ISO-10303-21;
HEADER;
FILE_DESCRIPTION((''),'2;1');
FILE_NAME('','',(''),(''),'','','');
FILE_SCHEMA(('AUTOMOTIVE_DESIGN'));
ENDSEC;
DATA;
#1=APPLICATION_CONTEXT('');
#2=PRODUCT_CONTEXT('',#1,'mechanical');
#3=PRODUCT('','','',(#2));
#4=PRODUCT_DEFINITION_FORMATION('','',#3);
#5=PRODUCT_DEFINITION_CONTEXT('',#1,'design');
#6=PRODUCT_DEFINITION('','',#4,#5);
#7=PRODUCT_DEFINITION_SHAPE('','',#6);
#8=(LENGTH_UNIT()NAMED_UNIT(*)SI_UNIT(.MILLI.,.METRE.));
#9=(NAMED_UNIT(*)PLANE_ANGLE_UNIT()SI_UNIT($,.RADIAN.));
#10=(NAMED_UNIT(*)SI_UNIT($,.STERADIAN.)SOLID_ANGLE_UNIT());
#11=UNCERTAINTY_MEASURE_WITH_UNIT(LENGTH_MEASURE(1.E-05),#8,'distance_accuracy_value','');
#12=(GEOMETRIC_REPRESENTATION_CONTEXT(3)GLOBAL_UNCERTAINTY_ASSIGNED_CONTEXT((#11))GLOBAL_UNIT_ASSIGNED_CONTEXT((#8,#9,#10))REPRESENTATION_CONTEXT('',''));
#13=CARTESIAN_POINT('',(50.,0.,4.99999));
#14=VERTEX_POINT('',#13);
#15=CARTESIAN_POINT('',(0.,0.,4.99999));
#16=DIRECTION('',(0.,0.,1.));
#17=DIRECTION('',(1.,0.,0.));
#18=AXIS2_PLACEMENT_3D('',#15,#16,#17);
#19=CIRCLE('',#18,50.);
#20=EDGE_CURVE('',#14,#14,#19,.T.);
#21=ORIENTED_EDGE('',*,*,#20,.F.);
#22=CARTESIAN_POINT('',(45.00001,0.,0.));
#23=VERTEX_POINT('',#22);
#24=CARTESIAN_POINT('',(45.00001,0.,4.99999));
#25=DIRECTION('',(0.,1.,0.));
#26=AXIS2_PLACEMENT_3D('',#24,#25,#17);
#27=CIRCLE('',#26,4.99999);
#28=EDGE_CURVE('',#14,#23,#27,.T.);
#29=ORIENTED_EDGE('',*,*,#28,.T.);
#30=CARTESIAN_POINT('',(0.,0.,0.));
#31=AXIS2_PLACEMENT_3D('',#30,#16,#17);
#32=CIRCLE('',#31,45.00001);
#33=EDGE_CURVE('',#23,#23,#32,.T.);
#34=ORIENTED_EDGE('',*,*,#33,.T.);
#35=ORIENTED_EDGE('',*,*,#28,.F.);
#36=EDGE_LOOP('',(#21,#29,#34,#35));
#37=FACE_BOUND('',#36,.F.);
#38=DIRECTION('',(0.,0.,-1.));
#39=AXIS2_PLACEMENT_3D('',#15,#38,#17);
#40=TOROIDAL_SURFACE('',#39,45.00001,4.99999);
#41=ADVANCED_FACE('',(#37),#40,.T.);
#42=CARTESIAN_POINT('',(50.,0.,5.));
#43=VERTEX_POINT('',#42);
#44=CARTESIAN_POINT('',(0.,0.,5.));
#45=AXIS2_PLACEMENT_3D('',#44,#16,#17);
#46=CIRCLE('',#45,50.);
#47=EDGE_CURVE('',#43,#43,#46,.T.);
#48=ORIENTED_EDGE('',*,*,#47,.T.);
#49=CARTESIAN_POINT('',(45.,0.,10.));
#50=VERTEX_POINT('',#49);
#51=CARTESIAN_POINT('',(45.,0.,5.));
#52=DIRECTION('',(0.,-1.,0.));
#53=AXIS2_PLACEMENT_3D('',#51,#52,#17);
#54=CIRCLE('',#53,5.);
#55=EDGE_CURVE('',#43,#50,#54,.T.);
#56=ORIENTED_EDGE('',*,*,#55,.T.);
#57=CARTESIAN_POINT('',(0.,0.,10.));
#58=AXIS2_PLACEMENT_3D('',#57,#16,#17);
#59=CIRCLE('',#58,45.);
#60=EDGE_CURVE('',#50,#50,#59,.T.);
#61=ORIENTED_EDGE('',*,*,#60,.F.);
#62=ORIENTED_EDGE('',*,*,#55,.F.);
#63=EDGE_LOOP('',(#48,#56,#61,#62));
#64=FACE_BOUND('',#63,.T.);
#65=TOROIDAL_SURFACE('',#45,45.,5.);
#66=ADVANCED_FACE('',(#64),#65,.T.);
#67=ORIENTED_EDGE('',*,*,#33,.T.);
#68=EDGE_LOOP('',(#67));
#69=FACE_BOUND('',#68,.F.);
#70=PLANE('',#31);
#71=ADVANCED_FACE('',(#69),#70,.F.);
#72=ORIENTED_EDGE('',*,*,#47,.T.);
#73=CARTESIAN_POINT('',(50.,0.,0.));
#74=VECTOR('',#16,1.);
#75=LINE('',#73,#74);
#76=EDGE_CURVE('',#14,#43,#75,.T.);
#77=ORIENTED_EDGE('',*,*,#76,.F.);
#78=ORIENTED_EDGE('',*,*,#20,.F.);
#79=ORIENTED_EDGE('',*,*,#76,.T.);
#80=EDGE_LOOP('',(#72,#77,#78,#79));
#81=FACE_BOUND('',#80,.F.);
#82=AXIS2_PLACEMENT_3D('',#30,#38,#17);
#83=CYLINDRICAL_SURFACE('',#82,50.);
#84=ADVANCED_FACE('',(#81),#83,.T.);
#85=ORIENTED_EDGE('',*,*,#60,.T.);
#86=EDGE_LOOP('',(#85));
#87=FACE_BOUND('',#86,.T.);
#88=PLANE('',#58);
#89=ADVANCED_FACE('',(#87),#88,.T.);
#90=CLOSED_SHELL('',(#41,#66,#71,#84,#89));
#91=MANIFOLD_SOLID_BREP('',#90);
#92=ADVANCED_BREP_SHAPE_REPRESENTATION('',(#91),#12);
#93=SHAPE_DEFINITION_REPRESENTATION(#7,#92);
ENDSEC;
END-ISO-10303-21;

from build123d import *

# Parameters (mm, degrees)
F0_R     = 50
F1_DEPTH = 10
F2_R     = 5
F3_R     = 4.99999


# Not quite as in the source:
# - a fillet or chamfer is up to 0.001 mm smaller than in the source, because OpenCascade refuses the exact size


with BuildPart() as f1:
    # F0 (on Top) → F1 (new body)
    with BuildSketch(Plane.XY):
        Circle(F0_R)
    extrude(amount=F1_DEPTH)

    # F2
    f2_edges = [f1.edges().sort_by_distance(p)[0] for p in [
        (-50, 0, 10),
    ]]
    fillet(f2_edges, radius=F2_R)

    # F3 (radius 5 in the source; OpenCascade refuses exactly that, so slightly less here)
    f3_edges = [f1.edges().sort_by_distance(p)[0] for p in [
        (-50, 0, 0),
    ]]
    fillet(f3_edges, radius=F3_R)


solid = f1.part
